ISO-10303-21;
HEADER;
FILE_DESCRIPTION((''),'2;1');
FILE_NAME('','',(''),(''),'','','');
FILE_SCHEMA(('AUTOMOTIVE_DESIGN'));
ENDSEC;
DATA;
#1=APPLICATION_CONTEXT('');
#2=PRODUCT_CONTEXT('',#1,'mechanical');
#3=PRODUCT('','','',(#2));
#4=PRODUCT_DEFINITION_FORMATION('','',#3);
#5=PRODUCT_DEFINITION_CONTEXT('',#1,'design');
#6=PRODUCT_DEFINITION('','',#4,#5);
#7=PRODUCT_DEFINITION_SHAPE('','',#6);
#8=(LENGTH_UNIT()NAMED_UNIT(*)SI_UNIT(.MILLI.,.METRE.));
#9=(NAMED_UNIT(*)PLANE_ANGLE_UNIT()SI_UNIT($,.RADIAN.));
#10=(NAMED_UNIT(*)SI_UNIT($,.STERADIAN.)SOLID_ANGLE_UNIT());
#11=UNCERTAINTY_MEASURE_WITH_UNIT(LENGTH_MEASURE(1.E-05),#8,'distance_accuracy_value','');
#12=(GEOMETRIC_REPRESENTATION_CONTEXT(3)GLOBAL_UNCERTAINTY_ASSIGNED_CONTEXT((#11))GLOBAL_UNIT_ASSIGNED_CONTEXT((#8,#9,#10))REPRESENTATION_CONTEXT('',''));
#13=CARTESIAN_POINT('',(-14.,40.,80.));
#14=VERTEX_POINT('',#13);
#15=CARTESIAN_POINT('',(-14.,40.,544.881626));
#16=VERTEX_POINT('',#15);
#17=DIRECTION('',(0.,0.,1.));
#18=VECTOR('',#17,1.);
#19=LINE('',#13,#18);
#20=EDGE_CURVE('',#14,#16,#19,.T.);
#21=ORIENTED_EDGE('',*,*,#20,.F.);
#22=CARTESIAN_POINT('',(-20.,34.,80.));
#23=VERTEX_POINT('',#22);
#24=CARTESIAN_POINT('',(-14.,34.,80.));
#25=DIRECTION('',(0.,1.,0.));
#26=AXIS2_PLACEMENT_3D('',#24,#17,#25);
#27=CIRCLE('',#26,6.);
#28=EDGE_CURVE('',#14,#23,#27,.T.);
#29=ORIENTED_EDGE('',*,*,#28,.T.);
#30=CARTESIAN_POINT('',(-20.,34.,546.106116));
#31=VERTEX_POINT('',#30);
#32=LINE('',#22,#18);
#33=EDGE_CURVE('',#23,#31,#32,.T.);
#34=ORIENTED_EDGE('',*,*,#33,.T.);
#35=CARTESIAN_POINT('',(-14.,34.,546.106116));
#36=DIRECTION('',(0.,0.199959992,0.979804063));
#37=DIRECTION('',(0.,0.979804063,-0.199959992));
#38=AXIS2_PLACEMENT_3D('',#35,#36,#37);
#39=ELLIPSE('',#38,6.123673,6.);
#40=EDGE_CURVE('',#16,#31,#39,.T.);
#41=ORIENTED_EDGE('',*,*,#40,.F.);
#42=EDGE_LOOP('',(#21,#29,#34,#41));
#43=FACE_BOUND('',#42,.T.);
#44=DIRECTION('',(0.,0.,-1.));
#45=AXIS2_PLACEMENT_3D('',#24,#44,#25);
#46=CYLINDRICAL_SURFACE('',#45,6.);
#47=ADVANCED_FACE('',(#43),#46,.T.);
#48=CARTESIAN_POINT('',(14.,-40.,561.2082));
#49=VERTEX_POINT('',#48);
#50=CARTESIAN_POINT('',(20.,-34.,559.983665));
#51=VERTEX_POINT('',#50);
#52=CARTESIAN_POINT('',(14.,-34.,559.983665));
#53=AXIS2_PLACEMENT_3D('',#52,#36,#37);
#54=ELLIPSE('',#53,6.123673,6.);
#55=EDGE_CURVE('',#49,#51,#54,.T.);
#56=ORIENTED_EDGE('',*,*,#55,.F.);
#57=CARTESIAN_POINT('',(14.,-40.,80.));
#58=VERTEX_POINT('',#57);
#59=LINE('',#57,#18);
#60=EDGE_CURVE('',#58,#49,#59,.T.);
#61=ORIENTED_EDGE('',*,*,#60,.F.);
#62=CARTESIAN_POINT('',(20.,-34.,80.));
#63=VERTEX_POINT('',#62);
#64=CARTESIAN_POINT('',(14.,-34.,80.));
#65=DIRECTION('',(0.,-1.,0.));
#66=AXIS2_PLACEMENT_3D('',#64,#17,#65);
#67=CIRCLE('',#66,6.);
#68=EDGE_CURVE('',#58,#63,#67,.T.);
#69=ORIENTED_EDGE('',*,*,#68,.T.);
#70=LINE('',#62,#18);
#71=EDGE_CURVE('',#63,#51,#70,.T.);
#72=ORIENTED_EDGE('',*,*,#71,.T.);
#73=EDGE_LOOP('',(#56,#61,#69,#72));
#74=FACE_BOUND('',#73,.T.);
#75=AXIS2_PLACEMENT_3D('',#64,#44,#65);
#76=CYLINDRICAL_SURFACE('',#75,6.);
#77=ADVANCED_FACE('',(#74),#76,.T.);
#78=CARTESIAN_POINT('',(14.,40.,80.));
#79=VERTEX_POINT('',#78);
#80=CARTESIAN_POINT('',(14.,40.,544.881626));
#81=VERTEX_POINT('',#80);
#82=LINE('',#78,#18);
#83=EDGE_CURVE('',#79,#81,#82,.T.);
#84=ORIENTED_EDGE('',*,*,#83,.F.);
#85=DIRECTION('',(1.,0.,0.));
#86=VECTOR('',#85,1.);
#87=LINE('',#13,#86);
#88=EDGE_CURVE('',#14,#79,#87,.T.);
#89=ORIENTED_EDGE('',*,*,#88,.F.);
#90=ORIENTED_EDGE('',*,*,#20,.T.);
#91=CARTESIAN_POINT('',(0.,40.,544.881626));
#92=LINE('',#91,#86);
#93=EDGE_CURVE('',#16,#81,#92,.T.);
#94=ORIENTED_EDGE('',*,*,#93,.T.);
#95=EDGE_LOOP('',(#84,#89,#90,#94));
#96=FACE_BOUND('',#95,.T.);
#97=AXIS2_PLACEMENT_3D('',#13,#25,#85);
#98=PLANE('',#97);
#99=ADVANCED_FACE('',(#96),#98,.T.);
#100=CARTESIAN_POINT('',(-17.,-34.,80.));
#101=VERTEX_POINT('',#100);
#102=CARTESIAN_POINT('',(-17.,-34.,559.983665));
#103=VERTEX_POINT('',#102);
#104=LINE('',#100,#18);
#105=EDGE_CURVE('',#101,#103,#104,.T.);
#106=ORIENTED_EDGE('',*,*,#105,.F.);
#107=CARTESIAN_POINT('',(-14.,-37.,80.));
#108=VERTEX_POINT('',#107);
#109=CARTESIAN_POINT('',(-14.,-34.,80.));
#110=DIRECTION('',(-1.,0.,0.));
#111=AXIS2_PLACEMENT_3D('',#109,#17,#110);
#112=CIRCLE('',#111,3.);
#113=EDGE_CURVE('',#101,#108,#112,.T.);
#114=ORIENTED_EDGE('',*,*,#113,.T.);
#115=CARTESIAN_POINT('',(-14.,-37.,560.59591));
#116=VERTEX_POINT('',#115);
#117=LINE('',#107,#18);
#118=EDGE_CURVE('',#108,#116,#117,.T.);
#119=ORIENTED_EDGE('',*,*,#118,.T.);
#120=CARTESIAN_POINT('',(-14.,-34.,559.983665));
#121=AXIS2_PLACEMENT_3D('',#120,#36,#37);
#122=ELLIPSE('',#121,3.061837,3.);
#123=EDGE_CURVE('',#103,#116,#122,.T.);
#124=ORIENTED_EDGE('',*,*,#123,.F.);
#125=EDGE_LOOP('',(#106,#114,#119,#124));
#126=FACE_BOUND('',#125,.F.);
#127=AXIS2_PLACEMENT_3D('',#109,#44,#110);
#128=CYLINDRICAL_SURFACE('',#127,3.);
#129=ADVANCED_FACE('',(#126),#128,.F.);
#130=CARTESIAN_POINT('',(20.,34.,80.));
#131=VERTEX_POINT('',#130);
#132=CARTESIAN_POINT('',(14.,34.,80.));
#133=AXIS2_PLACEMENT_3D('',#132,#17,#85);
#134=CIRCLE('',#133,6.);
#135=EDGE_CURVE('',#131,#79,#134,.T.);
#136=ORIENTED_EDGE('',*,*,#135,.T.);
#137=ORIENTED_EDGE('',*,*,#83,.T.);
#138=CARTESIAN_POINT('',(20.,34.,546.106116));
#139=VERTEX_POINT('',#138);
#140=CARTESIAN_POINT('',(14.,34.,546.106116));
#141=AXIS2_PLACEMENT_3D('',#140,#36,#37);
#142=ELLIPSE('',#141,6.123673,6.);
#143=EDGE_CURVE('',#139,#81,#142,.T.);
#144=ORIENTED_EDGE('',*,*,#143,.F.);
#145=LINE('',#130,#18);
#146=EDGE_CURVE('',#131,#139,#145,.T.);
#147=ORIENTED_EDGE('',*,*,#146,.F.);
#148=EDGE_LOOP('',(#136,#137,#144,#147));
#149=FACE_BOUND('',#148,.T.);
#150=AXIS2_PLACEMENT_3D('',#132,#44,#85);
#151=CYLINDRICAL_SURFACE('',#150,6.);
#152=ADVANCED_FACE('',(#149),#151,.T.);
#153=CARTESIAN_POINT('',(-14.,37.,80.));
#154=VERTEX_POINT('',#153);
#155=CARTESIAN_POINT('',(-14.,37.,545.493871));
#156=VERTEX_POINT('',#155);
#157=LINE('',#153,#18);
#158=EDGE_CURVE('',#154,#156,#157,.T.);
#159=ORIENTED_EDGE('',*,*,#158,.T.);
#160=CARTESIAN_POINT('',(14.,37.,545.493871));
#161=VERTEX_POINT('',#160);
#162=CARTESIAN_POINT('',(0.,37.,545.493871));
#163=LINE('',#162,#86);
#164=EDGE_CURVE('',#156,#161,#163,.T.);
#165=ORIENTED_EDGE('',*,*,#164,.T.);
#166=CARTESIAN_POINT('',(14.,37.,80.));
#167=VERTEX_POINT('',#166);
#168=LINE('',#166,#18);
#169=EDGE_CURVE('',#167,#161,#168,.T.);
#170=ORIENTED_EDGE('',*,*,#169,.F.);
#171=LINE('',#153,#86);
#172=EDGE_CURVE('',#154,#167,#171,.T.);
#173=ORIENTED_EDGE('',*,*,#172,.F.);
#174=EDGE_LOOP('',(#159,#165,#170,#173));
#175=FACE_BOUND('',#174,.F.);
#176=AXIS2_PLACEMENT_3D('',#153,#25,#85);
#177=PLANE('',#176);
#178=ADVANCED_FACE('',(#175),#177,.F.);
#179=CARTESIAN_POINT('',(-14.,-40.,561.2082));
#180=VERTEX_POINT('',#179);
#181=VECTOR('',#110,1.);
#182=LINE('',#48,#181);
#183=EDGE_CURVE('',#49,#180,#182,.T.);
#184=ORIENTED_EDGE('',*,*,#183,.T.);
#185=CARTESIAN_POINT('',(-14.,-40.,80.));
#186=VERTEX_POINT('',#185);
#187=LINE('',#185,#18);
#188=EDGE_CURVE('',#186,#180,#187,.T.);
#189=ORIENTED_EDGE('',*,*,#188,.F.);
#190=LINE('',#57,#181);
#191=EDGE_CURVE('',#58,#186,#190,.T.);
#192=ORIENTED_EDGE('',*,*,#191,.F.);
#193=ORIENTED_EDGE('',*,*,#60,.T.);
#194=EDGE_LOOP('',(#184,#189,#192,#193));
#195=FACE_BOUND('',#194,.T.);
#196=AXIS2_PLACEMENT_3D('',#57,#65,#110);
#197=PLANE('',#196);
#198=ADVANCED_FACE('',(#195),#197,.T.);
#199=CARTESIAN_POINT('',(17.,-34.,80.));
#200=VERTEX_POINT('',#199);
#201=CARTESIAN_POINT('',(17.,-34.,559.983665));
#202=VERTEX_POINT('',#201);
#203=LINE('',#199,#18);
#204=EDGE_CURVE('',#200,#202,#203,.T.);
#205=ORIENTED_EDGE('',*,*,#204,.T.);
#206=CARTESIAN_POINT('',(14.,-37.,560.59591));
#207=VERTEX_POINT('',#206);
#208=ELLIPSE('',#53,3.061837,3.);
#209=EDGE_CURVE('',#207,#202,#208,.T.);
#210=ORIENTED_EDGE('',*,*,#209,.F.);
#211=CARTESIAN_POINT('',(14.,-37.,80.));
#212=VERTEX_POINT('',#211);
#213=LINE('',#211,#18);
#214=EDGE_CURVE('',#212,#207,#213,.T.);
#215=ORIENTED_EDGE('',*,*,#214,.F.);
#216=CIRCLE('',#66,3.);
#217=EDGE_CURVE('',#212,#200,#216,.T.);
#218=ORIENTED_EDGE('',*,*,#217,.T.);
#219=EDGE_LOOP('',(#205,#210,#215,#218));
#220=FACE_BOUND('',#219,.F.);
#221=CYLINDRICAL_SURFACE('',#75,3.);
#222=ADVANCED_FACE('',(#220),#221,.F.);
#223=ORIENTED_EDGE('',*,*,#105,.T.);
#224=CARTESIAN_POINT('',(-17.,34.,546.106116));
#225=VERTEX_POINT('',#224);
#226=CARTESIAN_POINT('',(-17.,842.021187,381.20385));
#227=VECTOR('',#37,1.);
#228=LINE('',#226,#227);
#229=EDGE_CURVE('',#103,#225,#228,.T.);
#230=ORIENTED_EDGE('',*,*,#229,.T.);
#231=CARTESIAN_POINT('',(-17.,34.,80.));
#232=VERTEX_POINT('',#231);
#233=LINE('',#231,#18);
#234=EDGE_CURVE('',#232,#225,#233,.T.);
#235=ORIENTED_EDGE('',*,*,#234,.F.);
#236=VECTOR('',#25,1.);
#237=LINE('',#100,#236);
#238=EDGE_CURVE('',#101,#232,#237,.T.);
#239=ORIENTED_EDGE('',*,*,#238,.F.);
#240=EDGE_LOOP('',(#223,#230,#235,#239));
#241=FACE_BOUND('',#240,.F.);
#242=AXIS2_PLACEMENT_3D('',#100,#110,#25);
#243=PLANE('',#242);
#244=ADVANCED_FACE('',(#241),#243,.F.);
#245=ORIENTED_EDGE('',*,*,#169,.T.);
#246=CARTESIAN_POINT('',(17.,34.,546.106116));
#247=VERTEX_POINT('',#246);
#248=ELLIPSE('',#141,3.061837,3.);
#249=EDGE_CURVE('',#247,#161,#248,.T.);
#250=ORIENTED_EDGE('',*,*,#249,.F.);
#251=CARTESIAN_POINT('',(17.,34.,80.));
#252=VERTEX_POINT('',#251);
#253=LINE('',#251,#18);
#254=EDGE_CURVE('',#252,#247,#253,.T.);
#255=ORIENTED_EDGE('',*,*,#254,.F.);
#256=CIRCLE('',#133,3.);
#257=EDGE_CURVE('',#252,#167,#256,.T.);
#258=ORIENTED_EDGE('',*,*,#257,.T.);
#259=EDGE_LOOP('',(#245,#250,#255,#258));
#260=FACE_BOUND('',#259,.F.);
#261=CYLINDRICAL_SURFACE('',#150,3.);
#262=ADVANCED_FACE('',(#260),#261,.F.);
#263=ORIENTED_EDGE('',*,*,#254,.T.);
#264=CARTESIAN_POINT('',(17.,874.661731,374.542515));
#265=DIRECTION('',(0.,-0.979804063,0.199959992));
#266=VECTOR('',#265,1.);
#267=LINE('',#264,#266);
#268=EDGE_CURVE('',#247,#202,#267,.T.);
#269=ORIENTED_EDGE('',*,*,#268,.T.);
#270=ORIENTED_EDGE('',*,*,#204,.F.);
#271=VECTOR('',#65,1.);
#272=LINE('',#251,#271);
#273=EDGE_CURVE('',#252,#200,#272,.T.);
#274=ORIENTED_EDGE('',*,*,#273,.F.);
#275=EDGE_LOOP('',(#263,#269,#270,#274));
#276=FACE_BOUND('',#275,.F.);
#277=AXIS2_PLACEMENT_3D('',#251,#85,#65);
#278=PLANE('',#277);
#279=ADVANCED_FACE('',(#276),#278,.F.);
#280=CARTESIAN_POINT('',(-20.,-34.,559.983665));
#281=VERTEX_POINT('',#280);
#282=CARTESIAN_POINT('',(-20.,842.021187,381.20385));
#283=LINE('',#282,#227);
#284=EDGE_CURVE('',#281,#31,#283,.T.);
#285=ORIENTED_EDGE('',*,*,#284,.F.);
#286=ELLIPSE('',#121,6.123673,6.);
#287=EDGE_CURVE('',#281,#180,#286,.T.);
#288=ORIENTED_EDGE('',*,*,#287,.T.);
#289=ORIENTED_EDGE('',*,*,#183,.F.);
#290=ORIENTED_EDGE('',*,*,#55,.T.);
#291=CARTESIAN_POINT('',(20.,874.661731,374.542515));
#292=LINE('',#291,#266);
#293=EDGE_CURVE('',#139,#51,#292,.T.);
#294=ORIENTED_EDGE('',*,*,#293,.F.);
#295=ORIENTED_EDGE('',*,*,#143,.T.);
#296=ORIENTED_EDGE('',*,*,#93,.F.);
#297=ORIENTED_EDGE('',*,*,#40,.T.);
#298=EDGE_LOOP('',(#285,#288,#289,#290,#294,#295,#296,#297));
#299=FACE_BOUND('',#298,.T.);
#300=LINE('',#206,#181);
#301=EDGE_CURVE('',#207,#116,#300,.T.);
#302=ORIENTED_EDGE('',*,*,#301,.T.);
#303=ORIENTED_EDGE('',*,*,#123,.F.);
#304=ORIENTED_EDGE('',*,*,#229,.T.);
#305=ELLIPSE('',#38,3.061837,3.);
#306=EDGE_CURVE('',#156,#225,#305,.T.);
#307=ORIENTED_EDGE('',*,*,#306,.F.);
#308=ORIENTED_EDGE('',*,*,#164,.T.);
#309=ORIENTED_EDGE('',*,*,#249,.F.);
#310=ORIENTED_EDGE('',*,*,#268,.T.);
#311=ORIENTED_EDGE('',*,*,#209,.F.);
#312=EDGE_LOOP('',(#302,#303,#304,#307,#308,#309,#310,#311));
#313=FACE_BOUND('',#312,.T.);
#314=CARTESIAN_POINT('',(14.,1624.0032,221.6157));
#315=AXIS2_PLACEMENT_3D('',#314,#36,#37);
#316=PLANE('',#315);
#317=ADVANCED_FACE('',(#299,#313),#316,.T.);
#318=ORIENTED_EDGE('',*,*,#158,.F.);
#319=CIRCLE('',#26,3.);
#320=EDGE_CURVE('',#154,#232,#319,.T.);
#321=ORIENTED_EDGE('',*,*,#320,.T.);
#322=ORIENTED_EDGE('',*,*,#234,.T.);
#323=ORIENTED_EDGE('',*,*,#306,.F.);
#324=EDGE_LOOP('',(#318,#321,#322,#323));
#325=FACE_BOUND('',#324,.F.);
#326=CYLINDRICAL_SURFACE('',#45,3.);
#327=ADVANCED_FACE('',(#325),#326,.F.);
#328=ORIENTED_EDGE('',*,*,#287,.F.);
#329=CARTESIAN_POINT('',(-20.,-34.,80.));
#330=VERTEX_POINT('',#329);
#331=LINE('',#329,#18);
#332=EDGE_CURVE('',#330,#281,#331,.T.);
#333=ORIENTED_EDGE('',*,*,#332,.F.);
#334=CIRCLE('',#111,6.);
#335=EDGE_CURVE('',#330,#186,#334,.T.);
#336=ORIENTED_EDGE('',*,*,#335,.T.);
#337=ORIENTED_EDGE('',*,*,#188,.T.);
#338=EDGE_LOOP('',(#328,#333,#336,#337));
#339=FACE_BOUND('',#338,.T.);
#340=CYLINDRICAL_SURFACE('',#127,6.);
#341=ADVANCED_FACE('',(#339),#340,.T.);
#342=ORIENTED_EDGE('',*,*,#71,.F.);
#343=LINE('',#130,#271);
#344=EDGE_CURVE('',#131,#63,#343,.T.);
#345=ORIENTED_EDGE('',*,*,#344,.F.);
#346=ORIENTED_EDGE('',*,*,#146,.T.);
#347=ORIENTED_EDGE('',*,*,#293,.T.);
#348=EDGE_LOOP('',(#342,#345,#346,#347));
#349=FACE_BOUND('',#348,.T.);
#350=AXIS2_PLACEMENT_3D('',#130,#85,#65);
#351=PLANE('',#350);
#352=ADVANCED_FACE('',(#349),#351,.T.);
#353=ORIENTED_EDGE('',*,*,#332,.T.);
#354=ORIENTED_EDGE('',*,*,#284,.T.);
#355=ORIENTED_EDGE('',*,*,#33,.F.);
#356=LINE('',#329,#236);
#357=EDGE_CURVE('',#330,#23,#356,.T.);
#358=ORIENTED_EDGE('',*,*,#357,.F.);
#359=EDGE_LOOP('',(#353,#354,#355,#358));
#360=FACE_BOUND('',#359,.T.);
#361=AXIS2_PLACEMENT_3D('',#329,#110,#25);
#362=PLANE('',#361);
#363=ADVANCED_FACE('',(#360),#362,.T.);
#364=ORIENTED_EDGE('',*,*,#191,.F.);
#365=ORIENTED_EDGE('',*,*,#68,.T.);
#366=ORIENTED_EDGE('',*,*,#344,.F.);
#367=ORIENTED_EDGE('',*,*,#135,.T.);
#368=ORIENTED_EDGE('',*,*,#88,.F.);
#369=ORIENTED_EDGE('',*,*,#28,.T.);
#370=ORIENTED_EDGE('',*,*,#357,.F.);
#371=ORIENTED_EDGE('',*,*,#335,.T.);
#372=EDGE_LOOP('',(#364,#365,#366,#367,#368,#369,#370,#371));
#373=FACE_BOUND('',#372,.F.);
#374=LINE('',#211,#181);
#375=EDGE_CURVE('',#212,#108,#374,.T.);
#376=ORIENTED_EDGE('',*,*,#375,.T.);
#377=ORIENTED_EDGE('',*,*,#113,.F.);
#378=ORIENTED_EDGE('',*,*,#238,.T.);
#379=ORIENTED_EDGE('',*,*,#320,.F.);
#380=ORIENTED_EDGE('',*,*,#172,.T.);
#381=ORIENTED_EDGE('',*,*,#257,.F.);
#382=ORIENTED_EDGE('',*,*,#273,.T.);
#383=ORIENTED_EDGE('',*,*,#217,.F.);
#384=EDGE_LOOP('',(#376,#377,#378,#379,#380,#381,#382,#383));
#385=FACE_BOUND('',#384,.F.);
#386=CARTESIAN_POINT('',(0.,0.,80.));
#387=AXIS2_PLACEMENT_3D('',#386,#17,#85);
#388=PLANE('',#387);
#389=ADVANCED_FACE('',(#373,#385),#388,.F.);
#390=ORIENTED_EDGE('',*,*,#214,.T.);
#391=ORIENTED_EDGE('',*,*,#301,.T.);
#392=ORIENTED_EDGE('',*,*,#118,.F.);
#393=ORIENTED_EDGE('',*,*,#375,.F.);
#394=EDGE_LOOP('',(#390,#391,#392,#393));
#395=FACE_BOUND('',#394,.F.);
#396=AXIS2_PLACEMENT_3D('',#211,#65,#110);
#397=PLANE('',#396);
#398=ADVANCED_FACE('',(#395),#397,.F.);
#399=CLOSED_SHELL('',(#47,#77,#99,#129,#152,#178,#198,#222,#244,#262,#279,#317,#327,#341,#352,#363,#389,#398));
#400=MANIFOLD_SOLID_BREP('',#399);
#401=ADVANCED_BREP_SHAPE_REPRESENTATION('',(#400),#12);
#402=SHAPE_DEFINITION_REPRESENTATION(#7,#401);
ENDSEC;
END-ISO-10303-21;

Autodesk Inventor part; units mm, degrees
ref_plane "Start Plane" through (0, 0, 80) normal (0, 0, 1) x (1, 0, 0)
ref_plane "End Plane" through (0, 0, 561.2082) normal (0, 0, 1) x (1, 0, 0)
sketch "Sketch" plane through (0, 0, 0) normal (0, 0, 1) x (1, 0, 0)
  line L0 (-20, -34) -> (-20, 34)
  line L1 (-14, 40) -> (14, 40)
  line L2 (20, 34) -> (20, -34)
  line L3 (14, -40) -> (-14, -40)
  arc A0 (-20, -34) -> (-14, -40) centre (-14, -34) ccw
  arc A1 (20, 34) -> (14, 40) centre (14, 34) ccw
  arc A2 (-14, 40) -> (-20, 34) centre (-14, 34) ccw
  arc A3 (14, -40) -> (20, -34) centre (14, -34) ccw
  arc A4 (-14, 37) -> (-17, 34) centre (-14, 34) ccw
  line L4 (-14, 37) -> (14, 37)
  arc A5 (17, 34) -> (14, 37) centre (14, 34) ccw
  line L5 (17, 34) -> (17, -34)
  arc A6 (14, -37) -> (17, -34) centre (14, -34) ccw
  line L6 (14, -37) -> (-14, -37)
  arc A7 (-17, -34) -> (-14, -37) centre (-14, -34) ccw
  line L7 (-17, -34) -> (-17, 34)
  line L8 (0, 57.7397) -> (0, -57.7397) construction
  line L9 (-29.7397, 0) -> (29.7397, 0) construction
  dimension "d7" = 6
  dimension "d9" = 40
  dimension "d11" = 80
  dimension "d12" = 3
  dimension "d15" = 20
  dimension "d16" = 40
extrude "Body" add sketch "Sketch" along normal up to surface (481.2082 mm away) from surface at 80
sketch "Sketch3" plane through (0, 0, 0) normal (0, 0, 1) x (1, 0, 0)
  line L0 (0, 0) -> (10, 0)
ref_plane "Work Plane3" through (0, 0, 0) normal (0, -1, 0) x (1, 0, 0)
ref_plane "Work Plane4" through (14, 1624.0032, 221.6157) normal (0, 0.19996, 0.9798041) x (1, 0, 0)
split "Split1" plane through (14, 1624.0032, 221.6157) removes the side toward (0, 0.19996, 0.9798041)
sketch "Sketch4" plane through (0, 0, 0) normal (0, -1, 0) x (1, 0, 0)
  line L0 (-2, 80) -> (12, 80) projected
  line L1 (-2, 561.2082) -> (12, 561.2082) projected
  dimension "d18" = 481.2082
equation "\"d7\" = G_IR"
equation "\"d9\" = G_W"
equation "\"d11\" = G_H"
equation "\"d12\" = G_T"
equation "\"d15\" = 0.5 * d9"
equation "\"d16\" = 0.5 * d11"
equation "\"d3\" = G_L"
equation "\"G_W\" = 40"
equation "\"G_H\" = 80"
equation "\"G_T\" = 3"
equation "\"G_IR\" = 6"
equation "\"G_L\" = d18"
equation "\"G_OFFSET_END\" = -65.32245"
equation "\"d14\" = G_OFFSET_END + B_L"
equation "\"B_L\" = 626.53061"
properties part number "ISO 10799-2 - 80x40x3 - 481,21" material "Steel, Mild"
